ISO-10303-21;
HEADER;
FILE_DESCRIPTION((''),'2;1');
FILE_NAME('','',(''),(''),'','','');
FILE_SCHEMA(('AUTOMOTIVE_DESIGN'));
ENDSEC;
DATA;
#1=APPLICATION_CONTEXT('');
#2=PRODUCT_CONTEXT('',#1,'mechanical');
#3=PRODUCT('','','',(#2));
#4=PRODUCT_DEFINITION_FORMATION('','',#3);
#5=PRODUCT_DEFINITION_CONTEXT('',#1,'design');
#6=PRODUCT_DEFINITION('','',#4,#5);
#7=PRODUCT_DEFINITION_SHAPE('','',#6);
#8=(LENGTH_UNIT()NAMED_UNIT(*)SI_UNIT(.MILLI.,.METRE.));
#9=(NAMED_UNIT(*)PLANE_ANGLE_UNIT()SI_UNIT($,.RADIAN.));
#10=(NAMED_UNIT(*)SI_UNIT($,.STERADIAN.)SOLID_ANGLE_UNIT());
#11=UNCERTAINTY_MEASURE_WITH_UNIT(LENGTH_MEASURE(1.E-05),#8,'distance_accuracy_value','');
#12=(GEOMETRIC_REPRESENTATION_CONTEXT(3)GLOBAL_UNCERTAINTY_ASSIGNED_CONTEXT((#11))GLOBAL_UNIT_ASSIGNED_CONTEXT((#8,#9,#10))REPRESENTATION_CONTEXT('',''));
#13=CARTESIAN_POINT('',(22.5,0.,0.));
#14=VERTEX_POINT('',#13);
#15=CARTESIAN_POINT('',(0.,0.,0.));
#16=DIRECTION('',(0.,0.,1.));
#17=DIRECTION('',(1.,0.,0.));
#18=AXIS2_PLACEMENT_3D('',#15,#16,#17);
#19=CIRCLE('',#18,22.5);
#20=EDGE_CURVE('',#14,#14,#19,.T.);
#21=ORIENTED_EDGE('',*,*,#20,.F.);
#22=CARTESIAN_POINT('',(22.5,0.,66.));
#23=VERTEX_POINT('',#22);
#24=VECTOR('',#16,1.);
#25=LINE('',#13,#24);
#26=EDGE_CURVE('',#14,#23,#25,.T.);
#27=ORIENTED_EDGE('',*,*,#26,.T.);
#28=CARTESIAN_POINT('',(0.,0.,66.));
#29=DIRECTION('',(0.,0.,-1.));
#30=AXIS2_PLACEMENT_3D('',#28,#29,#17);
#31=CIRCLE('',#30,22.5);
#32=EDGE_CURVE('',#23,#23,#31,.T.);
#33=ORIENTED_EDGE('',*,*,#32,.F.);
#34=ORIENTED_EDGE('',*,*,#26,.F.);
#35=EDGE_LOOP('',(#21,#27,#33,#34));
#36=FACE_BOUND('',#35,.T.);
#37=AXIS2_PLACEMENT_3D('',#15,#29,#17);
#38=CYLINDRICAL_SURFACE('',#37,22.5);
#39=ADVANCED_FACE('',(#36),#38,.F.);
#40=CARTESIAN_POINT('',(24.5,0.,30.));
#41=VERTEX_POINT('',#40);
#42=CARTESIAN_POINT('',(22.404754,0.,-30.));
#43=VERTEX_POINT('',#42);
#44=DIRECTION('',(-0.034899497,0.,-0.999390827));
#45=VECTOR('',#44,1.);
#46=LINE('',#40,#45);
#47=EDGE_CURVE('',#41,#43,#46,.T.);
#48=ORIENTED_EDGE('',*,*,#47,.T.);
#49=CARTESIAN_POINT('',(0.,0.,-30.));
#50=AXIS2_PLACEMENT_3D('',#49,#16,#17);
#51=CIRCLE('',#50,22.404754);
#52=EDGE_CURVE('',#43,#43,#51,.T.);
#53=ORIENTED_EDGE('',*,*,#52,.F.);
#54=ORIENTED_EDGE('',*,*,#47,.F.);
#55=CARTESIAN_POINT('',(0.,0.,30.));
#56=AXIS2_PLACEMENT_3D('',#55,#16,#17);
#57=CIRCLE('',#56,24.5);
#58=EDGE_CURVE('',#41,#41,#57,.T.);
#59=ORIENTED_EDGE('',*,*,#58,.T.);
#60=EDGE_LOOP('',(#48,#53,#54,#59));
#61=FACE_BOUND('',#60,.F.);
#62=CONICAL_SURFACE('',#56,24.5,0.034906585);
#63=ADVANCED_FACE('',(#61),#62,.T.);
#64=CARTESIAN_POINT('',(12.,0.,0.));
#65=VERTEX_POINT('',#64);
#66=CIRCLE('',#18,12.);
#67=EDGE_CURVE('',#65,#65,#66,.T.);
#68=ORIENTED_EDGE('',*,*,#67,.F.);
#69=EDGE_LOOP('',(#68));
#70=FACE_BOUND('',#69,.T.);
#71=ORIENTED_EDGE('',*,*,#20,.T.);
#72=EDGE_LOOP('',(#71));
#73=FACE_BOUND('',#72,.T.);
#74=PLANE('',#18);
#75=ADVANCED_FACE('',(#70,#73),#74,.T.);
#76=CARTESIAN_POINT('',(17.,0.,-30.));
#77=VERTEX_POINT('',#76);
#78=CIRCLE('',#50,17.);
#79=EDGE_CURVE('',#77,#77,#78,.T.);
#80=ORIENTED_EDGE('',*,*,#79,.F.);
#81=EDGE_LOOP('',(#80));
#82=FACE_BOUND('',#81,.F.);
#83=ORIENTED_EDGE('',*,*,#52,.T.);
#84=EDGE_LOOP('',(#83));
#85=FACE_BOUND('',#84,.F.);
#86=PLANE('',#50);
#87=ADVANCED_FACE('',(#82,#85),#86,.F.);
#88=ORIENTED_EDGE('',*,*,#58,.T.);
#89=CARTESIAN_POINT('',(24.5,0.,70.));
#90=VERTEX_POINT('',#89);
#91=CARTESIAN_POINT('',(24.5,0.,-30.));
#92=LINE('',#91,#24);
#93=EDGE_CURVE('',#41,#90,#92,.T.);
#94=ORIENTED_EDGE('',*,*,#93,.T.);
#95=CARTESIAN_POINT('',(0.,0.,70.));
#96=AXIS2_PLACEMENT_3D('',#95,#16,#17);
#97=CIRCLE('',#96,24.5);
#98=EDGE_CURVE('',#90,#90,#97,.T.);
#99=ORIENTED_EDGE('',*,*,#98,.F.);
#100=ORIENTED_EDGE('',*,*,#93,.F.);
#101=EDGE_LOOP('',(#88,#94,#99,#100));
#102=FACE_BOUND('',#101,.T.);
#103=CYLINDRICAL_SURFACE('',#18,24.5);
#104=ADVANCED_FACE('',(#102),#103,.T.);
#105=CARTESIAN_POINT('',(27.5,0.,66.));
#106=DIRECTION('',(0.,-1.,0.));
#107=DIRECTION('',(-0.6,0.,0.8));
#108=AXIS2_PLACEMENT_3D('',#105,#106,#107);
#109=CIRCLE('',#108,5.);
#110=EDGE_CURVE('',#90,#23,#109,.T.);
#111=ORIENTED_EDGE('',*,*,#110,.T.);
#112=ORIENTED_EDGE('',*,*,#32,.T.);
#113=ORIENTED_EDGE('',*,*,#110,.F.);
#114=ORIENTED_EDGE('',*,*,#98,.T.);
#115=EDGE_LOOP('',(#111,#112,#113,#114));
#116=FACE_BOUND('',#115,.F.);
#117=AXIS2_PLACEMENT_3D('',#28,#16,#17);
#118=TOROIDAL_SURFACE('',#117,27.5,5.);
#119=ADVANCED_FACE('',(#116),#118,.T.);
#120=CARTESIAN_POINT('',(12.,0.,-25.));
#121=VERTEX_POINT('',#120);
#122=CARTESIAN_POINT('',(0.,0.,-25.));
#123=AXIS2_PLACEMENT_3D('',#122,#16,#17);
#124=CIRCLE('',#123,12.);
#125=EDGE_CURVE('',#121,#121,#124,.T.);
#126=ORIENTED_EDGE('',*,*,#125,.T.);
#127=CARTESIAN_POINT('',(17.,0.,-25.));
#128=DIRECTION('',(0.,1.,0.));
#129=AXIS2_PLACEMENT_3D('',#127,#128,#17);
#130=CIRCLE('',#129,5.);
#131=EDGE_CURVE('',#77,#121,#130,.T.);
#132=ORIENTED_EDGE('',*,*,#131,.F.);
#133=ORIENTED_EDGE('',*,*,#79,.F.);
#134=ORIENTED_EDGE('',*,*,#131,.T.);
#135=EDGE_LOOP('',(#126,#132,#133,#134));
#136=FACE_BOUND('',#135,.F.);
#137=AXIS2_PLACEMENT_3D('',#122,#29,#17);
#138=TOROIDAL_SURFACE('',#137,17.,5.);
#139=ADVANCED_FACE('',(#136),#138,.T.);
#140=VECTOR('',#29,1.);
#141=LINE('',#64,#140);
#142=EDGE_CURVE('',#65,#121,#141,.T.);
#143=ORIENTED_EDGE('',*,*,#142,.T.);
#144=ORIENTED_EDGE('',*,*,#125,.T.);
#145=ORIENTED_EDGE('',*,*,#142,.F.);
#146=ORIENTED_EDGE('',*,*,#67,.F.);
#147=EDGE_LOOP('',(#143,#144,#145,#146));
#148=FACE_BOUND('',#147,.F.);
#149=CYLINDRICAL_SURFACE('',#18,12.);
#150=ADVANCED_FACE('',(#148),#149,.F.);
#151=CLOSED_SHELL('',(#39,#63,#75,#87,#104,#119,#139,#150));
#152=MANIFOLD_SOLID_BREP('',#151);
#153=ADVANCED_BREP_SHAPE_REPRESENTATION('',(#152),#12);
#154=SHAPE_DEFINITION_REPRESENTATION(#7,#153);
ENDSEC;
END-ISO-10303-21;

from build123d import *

# Parameters (mm, degrees)
F0_R          = 24.5
F1_DEPTH      = 70
F1_DEPTH_BACK = 30
F2_R          = 22.5
F3_DEPTH      = 81.3
F4_R          = 12
F5_DEPTH      = 41.2
F6_R          = 5
F7_SIZE2      = 2.0952461695
F7_SIZE       = 60


# Not quite as in the source:
# - a fillet or chamfer that OpenCascade refuses, or shapes differently, is made with other operations: its cross-section is extruded or revolved along the edge and cut away or added


with BuildPart() as f1:
    # F0 (on Top) → F1 (new body, two sides)
    with BuildSketch(Plane.XY) as f1_sk:
        Circle(F0_R)
    extrude(amount=F1_DEPTH)
    extrude(f1_sk.sketch, amount=-F1_DEPTH_BACK)

    # F2 (on Top) → F3 (cut)
    with BuildSketch(Plane.XY):
        Circle(F2_R)
    extrude(amount=F3_DEPTH, mode=Mode.SUBTRACT)

    # F4 (on Top) → F5 (cut)
    with BuildSketch(Plane.XY):
        Circle(F4_R)
    extrude(amount=-F5_DEPTH, mode=Mode.SUBTRACT)

    # F6
    f6_edges = [f1.edges().sort_by_distance(p)[0] for p in [
        (-12, 0, -30),
    ]]
    fillet(f6_edges, radius=F6_R)

    # F7
    f7_edges = [f1.edges().sort_by_distance(p)[0] for p in [
        (-24.5, 0, -30),
    ]]
    f7_side = f1.faces().sort_by_distance((-24.5, 0, -15))[0]
    chamfer(f7_edges, length=F7_SIZE, length2=F7_SIZE2, reference=f7_side)

    # F8: fillet of radius 5 on 1 edges, made by hand

    # F8_s1 → F8_t2 (revolve, cut)
    with BuildSketch(Plane.XZ):
        with BuildLine():
            ThreePointArc((24.5, 70), (23.027864045, 68.2360679775), (22.5, 66))
            Line((22.5, 66), (22.5, 70))
            Line((22.5, 70), (24.5, 70))
        make_face()
    revolve(axis=Axis((0, 0, 70), (0, 0, -1)), mode=Mode.SUBTRACT)


solid = f1.part
